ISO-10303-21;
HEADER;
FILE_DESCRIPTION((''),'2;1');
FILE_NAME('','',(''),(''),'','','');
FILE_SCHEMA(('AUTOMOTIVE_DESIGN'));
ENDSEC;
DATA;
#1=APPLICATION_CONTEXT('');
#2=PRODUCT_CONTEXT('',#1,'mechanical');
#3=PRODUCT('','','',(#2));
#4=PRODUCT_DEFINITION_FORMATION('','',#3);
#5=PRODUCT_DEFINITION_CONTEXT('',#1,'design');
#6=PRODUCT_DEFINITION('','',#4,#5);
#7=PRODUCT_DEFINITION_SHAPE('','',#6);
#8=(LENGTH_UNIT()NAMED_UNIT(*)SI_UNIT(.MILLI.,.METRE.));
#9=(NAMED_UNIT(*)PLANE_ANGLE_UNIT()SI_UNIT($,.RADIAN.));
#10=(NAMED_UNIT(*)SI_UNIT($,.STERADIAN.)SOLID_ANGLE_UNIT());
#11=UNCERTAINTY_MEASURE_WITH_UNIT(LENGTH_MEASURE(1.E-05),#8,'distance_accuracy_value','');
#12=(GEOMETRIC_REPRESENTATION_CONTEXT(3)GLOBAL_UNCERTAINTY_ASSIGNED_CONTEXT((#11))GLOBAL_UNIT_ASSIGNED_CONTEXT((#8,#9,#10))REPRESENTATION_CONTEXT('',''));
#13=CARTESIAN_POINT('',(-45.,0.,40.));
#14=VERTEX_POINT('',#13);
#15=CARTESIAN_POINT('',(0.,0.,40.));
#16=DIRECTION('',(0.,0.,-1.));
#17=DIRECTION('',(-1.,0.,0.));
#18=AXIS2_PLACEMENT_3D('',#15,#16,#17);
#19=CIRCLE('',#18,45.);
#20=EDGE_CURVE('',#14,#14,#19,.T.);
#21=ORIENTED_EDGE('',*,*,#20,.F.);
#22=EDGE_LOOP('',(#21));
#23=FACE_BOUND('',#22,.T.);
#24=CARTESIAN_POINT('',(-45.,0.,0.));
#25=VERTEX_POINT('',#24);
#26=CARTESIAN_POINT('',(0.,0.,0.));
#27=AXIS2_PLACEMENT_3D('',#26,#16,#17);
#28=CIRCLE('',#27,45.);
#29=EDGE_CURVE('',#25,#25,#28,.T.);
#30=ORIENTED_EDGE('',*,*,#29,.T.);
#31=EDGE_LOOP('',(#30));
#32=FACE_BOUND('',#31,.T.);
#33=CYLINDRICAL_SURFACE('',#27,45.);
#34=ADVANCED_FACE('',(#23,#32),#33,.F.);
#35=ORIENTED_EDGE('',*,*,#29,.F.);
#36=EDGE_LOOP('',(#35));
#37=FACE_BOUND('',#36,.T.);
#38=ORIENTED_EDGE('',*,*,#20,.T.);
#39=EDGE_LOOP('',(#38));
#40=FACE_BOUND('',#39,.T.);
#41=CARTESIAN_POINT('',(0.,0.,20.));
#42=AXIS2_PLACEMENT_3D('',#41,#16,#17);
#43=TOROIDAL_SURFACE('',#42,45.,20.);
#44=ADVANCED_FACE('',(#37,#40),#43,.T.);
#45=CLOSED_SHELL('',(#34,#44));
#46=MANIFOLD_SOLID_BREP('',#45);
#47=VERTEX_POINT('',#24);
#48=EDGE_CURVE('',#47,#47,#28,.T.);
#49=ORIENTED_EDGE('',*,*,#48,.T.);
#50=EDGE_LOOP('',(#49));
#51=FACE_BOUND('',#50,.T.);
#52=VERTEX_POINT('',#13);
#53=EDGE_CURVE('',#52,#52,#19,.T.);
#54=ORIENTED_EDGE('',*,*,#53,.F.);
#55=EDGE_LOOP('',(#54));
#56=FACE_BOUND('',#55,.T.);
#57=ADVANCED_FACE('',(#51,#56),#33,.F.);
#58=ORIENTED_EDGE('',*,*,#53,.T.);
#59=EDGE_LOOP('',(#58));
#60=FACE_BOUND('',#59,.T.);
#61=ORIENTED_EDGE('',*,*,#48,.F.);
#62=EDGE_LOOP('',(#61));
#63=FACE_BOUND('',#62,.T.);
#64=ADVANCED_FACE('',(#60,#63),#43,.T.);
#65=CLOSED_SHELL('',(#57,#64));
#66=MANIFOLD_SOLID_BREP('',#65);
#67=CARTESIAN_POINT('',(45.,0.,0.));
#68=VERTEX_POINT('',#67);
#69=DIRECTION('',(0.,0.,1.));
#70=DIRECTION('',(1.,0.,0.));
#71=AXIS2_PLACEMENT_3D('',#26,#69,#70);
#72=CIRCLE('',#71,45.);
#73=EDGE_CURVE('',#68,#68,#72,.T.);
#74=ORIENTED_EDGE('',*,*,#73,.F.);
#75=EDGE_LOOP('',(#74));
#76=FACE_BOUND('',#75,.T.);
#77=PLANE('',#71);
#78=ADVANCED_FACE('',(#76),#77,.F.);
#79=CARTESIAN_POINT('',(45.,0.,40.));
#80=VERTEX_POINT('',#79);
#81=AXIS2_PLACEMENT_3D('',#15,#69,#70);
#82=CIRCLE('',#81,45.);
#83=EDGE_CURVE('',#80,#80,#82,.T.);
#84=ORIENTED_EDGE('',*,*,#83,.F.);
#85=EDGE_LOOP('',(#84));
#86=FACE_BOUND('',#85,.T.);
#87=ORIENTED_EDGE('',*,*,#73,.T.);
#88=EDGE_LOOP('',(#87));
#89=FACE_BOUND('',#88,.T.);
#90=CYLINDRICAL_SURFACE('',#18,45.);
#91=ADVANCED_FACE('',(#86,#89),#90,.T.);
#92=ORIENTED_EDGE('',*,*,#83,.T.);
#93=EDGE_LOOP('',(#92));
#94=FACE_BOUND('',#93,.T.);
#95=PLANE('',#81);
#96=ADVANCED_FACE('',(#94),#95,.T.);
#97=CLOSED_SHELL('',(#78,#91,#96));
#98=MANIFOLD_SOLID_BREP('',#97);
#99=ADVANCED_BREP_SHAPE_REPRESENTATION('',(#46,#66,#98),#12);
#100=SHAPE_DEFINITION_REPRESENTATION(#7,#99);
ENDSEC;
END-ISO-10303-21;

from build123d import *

# Parameters (mm, degrees)
CROQUIS1_R              = 45
SALIENTE_EXTRUIR1_DEPTH = 40


# Read off the part's stored shape, not the designer's step: Revolución1
with BuildPart() as part:
    # Croquis1 → Saliente-Extruir1 (new body)
    with BuildSketch(Plane.XY):
        Circle(CROQUIS1_R)
    extrude(amount=SALIENTE_EXTRUIR1_DEPTH)


with BuildPart() as body_2:
    # Revolución1 outline → Revolución1 (revolve)
    with BuildSketch(Plane.XZ):
        with BuildLine():
            ThreePointArc((45, 0), (65, 20), (45, 40))
            Line((45, 40), (45, 0))
        make_face()
    revolve(axis=Axis((0, 0, 0), (0, 0, 1)))


with BuildPart() as body_3:
    # Revoluci_n1 2 outline → Revoluci_n1 2 (revolve)
    with BuildSketch(Plane.XZ):
        with BuildLine():
            ThreePointArc((45, 0), (65, 20), (45, 40))
            Line((45, 40), (45, 0))
        make_face()
    revolve(axis=Axis((0, 0, 0), (0, 0, 1)))


solid = Compound([part.part, body_2.part, body_3.part])
